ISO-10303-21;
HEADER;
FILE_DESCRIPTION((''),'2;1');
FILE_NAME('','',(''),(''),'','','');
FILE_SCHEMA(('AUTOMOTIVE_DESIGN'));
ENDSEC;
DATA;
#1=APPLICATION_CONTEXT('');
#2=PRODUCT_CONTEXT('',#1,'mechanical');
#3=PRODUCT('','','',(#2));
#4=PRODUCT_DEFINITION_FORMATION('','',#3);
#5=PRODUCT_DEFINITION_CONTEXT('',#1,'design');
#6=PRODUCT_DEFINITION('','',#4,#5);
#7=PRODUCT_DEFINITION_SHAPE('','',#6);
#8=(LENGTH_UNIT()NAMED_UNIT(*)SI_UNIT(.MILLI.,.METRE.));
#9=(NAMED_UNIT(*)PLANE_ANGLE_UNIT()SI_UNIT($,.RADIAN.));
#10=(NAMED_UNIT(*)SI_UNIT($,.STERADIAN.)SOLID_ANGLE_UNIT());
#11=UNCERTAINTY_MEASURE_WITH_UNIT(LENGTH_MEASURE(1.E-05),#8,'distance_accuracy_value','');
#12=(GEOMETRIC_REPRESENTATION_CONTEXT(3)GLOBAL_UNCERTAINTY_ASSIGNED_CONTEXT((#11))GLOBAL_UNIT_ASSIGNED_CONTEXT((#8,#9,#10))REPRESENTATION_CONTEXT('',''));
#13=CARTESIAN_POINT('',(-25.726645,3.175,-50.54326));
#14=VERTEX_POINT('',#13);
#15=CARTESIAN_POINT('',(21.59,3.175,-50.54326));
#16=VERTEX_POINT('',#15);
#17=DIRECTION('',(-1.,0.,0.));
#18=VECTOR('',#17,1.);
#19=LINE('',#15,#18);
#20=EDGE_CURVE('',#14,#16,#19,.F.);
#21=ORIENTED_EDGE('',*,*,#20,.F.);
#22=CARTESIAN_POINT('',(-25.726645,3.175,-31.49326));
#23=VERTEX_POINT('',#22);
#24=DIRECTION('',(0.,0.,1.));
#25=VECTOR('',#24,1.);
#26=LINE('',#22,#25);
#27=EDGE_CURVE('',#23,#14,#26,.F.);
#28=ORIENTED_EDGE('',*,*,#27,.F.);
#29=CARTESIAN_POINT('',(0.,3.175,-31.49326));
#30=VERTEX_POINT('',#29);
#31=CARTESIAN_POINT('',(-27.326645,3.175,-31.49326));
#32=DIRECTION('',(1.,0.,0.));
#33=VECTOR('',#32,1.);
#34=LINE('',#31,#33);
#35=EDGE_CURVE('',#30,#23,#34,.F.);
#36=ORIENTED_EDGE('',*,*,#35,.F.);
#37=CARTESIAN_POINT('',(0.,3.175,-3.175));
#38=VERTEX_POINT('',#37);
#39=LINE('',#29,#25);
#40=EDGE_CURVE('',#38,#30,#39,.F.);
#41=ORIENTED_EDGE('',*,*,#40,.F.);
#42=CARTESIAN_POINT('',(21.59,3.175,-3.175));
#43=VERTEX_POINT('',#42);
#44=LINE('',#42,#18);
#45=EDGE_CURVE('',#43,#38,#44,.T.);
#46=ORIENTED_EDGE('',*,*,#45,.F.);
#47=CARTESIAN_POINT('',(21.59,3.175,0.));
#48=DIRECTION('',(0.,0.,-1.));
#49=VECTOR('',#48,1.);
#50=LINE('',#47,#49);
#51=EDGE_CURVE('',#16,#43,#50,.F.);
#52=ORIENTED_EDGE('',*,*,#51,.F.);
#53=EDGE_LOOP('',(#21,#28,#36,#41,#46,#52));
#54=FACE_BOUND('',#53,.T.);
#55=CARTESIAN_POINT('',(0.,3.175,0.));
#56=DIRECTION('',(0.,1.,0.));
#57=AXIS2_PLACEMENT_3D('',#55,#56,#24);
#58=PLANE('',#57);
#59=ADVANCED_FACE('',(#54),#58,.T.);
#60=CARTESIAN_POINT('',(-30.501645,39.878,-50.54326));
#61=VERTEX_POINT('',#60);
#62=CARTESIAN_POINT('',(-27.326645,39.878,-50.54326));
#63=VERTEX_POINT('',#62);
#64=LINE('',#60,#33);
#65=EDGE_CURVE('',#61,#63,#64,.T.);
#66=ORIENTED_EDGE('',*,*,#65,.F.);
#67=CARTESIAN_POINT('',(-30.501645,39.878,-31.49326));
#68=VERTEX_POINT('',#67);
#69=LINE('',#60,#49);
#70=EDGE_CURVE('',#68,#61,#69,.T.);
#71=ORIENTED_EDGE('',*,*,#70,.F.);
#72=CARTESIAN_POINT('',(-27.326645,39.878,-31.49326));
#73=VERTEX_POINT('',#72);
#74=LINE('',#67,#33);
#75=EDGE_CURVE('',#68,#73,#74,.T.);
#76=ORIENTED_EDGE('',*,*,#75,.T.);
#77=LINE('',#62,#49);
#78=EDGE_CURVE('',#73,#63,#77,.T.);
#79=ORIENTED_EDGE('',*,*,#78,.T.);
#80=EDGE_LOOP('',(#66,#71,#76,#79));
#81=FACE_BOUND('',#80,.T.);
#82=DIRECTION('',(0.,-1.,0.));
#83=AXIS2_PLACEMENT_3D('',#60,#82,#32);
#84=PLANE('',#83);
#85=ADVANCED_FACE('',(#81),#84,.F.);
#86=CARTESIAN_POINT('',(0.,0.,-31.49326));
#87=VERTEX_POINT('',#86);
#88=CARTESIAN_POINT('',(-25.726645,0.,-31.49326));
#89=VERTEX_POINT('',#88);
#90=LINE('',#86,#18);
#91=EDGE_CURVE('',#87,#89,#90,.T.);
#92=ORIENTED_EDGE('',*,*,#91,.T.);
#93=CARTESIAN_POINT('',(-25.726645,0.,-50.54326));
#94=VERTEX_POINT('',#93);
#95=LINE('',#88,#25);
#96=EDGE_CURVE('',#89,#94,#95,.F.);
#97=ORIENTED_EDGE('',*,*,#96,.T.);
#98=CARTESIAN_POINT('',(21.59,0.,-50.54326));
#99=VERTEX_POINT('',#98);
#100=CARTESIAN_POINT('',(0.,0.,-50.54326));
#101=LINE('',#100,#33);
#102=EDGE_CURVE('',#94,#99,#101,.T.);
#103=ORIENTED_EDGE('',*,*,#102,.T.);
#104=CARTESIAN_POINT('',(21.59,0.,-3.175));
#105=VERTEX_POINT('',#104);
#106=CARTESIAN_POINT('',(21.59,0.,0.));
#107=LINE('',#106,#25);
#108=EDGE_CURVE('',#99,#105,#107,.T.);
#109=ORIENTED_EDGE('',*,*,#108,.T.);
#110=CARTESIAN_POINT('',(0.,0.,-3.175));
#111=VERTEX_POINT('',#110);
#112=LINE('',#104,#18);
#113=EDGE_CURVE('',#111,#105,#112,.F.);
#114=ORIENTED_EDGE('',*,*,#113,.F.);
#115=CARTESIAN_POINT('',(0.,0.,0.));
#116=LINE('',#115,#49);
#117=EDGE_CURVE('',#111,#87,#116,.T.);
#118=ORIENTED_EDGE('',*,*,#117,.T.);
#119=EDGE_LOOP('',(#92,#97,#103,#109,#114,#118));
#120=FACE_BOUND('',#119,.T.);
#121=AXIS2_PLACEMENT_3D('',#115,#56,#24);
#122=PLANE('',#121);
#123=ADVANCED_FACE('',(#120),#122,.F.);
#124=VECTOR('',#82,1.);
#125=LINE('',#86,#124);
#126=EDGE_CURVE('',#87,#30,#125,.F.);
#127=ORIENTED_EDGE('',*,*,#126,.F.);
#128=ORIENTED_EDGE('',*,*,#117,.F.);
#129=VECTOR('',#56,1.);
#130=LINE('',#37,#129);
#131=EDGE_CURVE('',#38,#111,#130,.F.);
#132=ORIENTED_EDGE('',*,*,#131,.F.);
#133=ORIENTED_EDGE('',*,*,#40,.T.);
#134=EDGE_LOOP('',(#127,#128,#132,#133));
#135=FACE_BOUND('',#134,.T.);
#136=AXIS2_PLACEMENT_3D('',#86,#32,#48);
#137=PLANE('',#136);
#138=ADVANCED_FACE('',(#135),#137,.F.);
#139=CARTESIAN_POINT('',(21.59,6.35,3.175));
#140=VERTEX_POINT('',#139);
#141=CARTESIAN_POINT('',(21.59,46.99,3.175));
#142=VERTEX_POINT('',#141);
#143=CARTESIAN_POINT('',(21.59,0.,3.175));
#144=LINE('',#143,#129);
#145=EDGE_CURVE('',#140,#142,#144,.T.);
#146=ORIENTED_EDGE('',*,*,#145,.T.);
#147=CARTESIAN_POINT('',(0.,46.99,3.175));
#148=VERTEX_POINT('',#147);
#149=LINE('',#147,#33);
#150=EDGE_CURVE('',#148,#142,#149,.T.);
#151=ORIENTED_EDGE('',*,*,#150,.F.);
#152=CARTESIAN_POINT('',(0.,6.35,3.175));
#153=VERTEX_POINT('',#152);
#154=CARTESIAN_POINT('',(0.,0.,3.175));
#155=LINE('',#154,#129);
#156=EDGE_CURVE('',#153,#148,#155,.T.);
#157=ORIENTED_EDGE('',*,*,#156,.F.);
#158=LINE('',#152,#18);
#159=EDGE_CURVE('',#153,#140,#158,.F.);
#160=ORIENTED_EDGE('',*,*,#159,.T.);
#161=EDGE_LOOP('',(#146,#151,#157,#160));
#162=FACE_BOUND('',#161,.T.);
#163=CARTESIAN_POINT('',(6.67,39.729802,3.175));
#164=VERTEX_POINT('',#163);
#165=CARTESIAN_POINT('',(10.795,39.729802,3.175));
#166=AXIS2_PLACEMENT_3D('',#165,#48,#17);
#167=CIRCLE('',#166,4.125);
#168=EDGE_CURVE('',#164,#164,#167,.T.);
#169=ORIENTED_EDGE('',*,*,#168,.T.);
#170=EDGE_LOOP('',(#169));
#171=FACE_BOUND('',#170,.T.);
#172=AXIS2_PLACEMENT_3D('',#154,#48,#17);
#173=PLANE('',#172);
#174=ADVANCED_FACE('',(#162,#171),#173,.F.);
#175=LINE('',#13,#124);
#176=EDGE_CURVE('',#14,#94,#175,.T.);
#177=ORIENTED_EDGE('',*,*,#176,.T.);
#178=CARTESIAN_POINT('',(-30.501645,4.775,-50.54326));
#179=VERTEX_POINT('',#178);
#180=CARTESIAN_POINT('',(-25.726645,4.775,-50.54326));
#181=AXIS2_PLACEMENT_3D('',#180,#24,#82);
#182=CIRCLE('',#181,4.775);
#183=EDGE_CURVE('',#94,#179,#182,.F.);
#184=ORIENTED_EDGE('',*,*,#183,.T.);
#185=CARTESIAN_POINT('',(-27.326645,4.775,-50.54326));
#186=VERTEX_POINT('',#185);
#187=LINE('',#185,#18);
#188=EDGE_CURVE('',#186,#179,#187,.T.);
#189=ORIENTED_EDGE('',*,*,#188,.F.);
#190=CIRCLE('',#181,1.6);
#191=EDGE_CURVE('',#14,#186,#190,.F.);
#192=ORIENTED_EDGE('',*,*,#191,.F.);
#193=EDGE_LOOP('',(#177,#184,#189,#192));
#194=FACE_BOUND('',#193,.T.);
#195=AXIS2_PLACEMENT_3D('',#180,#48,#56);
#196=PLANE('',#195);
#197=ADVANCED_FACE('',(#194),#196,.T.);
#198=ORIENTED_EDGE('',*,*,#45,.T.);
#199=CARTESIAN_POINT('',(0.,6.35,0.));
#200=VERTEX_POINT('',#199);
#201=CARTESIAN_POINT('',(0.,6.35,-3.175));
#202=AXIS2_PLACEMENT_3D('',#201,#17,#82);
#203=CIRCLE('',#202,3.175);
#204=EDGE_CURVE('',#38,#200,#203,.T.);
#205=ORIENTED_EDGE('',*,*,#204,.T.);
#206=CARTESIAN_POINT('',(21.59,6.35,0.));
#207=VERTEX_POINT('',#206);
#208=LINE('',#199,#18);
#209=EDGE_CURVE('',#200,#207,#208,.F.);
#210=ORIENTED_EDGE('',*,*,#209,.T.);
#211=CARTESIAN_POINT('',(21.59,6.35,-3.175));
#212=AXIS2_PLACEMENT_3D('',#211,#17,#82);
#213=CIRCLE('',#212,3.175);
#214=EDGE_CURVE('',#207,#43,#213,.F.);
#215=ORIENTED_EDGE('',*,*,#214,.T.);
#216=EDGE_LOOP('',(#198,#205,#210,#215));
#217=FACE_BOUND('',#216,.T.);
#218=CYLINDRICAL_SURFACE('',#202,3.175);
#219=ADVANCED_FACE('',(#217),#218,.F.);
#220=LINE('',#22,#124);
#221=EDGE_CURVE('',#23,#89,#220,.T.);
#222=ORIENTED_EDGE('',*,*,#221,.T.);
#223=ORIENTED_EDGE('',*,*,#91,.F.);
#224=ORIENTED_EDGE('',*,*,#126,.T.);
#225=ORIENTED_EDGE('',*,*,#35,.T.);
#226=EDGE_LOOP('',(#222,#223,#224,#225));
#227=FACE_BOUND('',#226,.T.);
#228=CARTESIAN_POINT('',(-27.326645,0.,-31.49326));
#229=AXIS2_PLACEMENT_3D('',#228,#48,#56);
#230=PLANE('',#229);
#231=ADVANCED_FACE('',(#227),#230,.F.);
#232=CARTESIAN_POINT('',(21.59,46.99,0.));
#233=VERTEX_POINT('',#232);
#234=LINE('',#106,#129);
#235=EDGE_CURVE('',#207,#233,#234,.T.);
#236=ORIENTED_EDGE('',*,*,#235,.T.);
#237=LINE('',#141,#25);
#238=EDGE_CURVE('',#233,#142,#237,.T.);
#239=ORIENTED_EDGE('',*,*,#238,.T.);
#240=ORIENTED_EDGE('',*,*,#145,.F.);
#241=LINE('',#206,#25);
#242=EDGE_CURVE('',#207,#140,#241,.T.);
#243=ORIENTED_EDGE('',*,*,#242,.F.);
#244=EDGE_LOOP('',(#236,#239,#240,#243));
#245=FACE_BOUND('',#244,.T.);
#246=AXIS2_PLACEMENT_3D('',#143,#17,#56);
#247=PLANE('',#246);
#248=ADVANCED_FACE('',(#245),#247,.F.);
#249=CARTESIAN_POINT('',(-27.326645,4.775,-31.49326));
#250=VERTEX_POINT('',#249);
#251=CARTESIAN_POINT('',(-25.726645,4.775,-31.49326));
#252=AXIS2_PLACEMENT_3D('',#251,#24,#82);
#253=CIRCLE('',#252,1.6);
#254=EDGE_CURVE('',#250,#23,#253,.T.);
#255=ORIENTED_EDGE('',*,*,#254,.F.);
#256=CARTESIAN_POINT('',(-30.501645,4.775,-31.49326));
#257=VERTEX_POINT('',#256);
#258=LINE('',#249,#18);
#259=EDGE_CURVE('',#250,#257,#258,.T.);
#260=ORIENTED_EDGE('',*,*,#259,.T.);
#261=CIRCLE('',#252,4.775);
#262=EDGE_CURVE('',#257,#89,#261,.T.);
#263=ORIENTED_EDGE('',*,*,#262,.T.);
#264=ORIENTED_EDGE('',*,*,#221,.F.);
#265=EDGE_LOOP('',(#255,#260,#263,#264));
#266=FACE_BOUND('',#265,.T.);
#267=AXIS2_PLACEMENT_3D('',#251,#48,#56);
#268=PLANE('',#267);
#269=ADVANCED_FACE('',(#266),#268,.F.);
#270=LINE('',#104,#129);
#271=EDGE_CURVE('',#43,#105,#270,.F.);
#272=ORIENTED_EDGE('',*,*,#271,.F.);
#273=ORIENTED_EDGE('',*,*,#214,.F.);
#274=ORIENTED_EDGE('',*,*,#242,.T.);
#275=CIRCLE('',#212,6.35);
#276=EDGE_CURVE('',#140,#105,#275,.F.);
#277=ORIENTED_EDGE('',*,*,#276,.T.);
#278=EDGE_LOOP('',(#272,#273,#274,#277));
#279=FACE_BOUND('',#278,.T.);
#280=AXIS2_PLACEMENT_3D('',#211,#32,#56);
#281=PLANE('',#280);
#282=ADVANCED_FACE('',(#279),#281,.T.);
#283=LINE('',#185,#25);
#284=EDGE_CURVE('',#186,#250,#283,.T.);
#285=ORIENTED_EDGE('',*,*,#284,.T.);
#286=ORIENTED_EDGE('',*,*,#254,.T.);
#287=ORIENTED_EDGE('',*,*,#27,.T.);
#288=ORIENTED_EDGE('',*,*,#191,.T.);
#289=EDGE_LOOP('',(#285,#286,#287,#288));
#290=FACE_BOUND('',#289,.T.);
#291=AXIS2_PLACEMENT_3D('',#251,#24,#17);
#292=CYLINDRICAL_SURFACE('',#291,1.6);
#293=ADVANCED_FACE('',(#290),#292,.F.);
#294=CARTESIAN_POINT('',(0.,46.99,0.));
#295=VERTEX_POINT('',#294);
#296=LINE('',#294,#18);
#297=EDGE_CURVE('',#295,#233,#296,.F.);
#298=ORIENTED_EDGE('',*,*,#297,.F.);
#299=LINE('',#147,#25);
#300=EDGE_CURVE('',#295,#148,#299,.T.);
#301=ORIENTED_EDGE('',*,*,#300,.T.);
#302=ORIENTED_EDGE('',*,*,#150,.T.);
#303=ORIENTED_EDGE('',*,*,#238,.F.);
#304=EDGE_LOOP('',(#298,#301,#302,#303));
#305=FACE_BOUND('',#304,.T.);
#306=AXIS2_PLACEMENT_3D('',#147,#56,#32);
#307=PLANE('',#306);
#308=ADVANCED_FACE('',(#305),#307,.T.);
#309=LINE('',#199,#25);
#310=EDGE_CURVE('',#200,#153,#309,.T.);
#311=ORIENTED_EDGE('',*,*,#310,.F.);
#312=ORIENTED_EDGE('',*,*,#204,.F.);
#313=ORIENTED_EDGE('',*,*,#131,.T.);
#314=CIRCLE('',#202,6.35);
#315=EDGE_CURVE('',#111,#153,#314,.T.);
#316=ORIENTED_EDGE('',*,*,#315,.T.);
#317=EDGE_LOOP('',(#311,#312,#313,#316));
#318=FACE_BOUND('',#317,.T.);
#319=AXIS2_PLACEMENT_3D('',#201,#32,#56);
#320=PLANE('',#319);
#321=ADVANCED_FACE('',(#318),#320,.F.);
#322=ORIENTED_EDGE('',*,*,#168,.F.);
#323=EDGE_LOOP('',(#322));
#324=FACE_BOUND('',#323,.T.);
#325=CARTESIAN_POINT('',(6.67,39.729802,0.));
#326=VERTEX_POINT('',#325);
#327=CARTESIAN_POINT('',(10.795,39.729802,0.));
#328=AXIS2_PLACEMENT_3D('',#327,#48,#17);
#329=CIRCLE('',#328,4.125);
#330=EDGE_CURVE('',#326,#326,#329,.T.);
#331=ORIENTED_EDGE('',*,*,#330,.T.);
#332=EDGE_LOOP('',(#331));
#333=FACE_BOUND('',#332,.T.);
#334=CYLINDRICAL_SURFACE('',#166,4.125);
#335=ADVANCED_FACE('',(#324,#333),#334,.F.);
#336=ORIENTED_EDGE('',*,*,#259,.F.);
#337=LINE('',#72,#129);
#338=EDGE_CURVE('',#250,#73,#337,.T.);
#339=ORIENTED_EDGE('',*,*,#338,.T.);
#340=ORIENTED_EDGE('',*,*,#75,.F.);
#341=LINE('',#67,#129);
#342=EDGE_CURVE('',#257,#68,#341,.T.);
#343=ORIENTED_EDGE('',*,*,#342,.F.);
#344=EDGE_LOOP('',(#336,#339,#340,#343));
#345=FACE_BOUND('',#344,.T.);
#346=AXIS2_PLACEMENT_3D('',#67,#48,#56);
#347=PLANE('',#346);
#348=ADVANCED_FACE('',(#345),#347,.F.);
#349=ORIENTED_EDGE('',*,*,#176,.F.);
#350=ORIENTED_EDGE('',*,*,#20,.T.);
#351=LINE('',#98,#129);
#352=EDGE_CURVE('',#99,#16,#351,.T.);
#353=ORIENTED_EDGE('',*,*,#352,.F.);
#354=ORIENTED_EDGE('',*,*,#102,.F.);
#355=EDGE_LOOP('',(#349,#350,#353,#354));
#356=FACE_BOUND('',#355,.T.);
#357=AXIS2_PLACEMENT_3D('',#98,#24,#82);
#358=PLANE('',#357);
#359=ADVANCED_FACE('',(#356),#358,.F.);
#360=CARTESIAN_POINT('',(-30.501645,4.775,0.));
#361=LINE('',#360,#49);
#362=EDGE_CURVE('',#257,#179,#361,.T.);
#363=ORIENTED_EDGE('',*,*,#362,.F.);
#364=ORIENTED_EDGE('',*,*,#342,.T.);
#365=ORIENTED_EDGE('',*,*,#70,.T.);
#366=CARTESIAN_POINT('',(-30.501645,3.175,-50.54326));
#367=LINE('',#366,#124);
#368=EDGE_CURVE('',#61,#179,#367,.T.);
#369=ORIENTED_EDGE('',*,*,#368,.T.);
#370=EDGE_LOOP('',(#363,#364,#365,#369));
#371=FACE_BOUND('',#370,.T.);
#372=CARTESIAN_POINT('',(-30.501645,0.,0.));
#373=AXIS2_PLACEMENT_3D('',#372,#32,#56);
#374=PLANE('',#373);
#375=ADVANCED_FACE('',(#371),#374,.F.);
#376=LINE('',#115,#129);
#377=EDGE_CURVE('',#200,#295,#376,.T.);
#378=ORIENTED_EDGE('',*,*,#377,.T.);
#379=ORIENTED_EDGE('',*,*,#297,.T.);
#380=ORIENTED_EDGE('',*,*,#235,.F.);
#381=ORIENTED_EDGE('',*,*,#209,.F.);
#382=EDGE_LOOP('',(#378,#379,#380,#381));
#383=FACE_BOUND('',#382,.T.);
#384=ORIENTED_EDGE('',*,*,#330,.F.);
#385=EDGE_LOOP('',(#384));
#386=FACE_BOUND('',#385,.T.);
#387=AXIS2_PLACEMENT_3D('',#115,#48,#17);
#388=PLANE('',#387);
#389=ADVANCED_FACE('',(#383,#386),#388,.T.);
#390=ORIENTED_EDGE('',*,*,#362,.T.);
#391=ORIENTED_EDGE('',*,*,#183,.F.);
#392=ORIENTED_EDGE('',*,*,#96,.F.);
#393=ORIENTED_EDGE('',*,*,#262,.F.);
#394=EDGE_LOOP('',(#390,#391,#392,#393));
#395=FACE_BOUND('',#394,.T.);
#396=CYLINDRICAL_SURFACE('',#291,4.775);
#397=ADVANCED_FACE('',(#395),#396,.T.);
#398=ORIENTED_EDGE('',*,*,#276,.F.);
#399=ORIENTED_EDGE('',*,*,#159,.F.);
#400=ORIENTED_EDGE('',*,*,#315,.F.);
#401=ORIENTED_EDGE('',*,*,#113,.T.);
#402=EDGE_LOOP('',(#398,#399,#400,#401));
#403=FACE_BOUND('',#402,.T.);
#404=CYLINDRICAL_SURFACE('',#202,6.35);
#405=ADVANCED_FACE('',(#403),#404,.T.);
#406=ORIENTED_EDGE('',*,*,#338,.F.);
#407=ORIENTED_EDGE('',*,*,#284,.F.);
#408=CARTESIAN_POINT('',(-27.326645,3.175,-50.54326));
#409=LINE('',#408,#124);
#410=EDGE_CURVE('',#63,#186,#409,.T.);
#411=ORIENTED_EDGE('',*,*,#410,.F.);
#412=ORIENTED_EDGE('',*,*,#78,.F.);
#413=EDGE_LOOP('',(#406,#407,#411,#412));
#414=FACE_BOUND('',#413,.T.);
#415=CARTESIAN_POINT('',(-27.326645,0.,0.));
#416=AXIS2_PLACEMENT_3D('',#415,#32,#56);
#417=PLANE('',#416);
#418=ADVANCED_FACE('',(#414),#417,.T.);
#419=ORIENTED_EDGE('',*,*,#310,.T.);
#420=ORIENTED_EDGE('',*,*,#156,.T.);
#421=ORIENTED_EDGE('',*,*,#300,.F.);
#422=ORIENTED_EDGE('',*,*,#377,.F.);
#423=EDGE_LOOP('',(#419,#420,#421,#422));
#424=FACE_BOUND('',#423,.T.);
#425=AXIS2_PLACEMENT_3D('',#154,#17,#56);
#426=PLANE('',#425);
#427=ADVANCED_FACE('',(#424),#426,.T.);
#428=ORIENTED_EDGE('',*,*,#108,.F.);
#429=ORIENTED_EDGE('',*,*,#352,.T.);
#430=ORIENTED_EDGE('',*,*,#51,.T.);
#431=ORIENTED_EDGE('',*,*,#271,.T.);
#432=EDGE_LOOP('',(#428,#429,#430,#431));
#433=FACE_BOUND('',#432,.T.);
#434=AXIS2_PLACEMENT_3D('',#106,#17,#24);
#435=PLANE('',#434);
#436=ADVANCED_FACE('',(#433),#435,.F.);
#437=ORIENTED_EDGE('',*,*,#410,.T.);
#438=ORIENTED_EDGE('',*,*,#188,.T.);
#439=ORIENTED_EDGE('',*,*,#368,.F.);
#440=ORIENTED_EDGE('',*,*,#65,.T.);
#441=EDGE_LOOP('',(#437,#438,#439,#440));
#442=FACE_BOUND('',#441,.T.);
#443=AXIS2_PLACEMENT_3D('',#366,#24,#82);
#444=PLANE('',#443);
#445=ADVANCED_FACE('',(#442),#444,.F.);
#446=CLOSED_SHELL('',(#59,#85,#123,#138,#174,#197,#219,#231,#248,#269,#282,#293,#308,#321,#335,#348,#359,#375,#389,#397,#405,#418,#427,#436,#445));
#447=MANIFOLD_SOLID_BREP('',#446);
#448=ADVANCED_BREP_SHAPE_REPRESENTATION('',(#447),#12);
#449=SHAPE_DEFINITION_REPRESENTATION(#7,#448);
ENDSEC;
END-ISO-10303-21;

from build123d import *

# Parameters (mm, degrees)
SKETCH1_W                    = 21.59
SKETCH1_H                    = 46.99
SKETCH1_R                    = 4.124999878
BOSS_EXTRUDE1_DEPTH          = 3.175
EDGE_FLANGE2_STRIP_W         = 19.05
EDGE_FLANGE2_STRIP_H         = 3.175
EDGE_FLANGE2_STRIP_CUT_DEPTH = 21.59
EDGE_FLANGE2_DEPTH           = 21.59
EDGE_FLANGE2_FLAT_DEPTH      = 3.175
EDGE_FLANGE3_STRIP_W         = 15.900000204
EDGE_FLANGE3_STRIP_H         = 3.175
EDGE_FLANGE3_STRIP_CUT_DEPTH = 19.05
EDGE_FLANGE3_DEPTH           = 19.05


# Sheet-metal steps are written as plain solids
with BuildPart() as part:
    # Sketch1 → Boss-Extrude1 (new body)
    with BuildSketch(Plane.XY):
        with Locations((10.795, 23.495)):
            Rectangle(SKETCH1_W, SKETCH1_H)
        with Locations(Location((10.795, 39.729801599, 0), (0, 0, 180))):
            Circle(SKETCH1_R, mode=Mode.SUBTRACT)
    extrude(amount=BOSS_EXTRUDE1_DEPTH)

    # Edge-Flange2 strip (across the edge) → Edge-Flange2 strip cut (cut)
    with BuildSketch(Plane(origin=(21.59, 0, 0), x_dir=(0, 1, 0), z_dir=(-1, 0, 0))):
        with Locations((-3.175, -1.5875)):
            Rectangle(EDGE_FLANGE2_STRIP_W, EDGE_FLANGE2_STRIP_H)
    extrude(amount=EDGE_FLANGE2_STRIP_CUT_DEPTH, mode=Mode.SUBTRACT)

    # Edge-Flange2 bend section (across the edge) → Edge-Flange2 (add)
    with BuildSketch(Plane(origin=(21.59, 0, 0), x_dir=(0, 1, 0), z_dir=(-1, 0, 0))):
        with BuildLine():
            Line((0, 3.175), (3.175, 3.175))
            ThreePointArc((3.175, 3.175), (4.10493597, 0.92993597), (6.35, 0))
            Line((6.35, 0), (6.35, -3.175))
            ThreePointArc((6.35, -3.175), (1.859871939, -1.315128061), (0, 3.175))
        make_face()
    extrude(amount=EDGE_FLANGE2_DEPTH)

    # Edge-Flange2 profile (on flange) → Edge-Flange2 flat (add)
    with BuildSketch(Plane(origin=(0, 0, 0), x_dir=(-1, 0, 0), z_dir=(0, -1, 0))):
        Polygon((0, 3.175), (0, 31.493260102), (27.326645128, 31.493260102), (27.326645128, 50.543260102), (0, 50.543260102), (-21.59, 50.543260102), (-21.59, 3.175), align=None)
    extrude(amount=-EDGE_FLANGE2_FLAT_DEPTH)

    # Edge-Flange3 strip (across the edge) → Edge-Flange3 strip cut (cut)
    with BuildSketch(Plane(origin=(-27.326645128, 3.175, -50.543260102), x_dir=(1, 0, 0), z_dir=(0, 0, 1))):
        with Locations((-6.35, -1.5875)):
            Rectangle(EDGE_FLANGE3_STRIP_W, EDGE_FLANGE3_STRIP_H)
    extrude(amount=EDGE_FLANGE3_STRIP_CUT_DEPTH, mode=Mode.SUBTRACT)

    # Edge-Flange3 section (across the edge) → Edge-Flange3 (add)
    with BuildSketch(Plane(origin=(-27.326645128, 3.175, -50.543260102), x_dir=(1, 0, 0), z_dir=(0, 0, 1))):
        with BuildLine():
            Line((-3.175, 1.600000102), (-3.175, 36.703))
            Line((-3.175, 36.703), (0, 36.703))
            Line((0, 36.703), (0, 1.600000102))
            ThreePointArc((0, 1.600000102), (0.46862918, 0.46862918), (1.600000102, 0))
            Line((1.600000102, 0), (1.600000102, -3.175))
            ThreePointArc((1.600000102, -3.175), (-1.77643485, -1.77643485), (-3.175, 1.600000102))
        make_face()
    extrude(amount=EDGE_FLANGE3_DEPTH)


solid = part.part
